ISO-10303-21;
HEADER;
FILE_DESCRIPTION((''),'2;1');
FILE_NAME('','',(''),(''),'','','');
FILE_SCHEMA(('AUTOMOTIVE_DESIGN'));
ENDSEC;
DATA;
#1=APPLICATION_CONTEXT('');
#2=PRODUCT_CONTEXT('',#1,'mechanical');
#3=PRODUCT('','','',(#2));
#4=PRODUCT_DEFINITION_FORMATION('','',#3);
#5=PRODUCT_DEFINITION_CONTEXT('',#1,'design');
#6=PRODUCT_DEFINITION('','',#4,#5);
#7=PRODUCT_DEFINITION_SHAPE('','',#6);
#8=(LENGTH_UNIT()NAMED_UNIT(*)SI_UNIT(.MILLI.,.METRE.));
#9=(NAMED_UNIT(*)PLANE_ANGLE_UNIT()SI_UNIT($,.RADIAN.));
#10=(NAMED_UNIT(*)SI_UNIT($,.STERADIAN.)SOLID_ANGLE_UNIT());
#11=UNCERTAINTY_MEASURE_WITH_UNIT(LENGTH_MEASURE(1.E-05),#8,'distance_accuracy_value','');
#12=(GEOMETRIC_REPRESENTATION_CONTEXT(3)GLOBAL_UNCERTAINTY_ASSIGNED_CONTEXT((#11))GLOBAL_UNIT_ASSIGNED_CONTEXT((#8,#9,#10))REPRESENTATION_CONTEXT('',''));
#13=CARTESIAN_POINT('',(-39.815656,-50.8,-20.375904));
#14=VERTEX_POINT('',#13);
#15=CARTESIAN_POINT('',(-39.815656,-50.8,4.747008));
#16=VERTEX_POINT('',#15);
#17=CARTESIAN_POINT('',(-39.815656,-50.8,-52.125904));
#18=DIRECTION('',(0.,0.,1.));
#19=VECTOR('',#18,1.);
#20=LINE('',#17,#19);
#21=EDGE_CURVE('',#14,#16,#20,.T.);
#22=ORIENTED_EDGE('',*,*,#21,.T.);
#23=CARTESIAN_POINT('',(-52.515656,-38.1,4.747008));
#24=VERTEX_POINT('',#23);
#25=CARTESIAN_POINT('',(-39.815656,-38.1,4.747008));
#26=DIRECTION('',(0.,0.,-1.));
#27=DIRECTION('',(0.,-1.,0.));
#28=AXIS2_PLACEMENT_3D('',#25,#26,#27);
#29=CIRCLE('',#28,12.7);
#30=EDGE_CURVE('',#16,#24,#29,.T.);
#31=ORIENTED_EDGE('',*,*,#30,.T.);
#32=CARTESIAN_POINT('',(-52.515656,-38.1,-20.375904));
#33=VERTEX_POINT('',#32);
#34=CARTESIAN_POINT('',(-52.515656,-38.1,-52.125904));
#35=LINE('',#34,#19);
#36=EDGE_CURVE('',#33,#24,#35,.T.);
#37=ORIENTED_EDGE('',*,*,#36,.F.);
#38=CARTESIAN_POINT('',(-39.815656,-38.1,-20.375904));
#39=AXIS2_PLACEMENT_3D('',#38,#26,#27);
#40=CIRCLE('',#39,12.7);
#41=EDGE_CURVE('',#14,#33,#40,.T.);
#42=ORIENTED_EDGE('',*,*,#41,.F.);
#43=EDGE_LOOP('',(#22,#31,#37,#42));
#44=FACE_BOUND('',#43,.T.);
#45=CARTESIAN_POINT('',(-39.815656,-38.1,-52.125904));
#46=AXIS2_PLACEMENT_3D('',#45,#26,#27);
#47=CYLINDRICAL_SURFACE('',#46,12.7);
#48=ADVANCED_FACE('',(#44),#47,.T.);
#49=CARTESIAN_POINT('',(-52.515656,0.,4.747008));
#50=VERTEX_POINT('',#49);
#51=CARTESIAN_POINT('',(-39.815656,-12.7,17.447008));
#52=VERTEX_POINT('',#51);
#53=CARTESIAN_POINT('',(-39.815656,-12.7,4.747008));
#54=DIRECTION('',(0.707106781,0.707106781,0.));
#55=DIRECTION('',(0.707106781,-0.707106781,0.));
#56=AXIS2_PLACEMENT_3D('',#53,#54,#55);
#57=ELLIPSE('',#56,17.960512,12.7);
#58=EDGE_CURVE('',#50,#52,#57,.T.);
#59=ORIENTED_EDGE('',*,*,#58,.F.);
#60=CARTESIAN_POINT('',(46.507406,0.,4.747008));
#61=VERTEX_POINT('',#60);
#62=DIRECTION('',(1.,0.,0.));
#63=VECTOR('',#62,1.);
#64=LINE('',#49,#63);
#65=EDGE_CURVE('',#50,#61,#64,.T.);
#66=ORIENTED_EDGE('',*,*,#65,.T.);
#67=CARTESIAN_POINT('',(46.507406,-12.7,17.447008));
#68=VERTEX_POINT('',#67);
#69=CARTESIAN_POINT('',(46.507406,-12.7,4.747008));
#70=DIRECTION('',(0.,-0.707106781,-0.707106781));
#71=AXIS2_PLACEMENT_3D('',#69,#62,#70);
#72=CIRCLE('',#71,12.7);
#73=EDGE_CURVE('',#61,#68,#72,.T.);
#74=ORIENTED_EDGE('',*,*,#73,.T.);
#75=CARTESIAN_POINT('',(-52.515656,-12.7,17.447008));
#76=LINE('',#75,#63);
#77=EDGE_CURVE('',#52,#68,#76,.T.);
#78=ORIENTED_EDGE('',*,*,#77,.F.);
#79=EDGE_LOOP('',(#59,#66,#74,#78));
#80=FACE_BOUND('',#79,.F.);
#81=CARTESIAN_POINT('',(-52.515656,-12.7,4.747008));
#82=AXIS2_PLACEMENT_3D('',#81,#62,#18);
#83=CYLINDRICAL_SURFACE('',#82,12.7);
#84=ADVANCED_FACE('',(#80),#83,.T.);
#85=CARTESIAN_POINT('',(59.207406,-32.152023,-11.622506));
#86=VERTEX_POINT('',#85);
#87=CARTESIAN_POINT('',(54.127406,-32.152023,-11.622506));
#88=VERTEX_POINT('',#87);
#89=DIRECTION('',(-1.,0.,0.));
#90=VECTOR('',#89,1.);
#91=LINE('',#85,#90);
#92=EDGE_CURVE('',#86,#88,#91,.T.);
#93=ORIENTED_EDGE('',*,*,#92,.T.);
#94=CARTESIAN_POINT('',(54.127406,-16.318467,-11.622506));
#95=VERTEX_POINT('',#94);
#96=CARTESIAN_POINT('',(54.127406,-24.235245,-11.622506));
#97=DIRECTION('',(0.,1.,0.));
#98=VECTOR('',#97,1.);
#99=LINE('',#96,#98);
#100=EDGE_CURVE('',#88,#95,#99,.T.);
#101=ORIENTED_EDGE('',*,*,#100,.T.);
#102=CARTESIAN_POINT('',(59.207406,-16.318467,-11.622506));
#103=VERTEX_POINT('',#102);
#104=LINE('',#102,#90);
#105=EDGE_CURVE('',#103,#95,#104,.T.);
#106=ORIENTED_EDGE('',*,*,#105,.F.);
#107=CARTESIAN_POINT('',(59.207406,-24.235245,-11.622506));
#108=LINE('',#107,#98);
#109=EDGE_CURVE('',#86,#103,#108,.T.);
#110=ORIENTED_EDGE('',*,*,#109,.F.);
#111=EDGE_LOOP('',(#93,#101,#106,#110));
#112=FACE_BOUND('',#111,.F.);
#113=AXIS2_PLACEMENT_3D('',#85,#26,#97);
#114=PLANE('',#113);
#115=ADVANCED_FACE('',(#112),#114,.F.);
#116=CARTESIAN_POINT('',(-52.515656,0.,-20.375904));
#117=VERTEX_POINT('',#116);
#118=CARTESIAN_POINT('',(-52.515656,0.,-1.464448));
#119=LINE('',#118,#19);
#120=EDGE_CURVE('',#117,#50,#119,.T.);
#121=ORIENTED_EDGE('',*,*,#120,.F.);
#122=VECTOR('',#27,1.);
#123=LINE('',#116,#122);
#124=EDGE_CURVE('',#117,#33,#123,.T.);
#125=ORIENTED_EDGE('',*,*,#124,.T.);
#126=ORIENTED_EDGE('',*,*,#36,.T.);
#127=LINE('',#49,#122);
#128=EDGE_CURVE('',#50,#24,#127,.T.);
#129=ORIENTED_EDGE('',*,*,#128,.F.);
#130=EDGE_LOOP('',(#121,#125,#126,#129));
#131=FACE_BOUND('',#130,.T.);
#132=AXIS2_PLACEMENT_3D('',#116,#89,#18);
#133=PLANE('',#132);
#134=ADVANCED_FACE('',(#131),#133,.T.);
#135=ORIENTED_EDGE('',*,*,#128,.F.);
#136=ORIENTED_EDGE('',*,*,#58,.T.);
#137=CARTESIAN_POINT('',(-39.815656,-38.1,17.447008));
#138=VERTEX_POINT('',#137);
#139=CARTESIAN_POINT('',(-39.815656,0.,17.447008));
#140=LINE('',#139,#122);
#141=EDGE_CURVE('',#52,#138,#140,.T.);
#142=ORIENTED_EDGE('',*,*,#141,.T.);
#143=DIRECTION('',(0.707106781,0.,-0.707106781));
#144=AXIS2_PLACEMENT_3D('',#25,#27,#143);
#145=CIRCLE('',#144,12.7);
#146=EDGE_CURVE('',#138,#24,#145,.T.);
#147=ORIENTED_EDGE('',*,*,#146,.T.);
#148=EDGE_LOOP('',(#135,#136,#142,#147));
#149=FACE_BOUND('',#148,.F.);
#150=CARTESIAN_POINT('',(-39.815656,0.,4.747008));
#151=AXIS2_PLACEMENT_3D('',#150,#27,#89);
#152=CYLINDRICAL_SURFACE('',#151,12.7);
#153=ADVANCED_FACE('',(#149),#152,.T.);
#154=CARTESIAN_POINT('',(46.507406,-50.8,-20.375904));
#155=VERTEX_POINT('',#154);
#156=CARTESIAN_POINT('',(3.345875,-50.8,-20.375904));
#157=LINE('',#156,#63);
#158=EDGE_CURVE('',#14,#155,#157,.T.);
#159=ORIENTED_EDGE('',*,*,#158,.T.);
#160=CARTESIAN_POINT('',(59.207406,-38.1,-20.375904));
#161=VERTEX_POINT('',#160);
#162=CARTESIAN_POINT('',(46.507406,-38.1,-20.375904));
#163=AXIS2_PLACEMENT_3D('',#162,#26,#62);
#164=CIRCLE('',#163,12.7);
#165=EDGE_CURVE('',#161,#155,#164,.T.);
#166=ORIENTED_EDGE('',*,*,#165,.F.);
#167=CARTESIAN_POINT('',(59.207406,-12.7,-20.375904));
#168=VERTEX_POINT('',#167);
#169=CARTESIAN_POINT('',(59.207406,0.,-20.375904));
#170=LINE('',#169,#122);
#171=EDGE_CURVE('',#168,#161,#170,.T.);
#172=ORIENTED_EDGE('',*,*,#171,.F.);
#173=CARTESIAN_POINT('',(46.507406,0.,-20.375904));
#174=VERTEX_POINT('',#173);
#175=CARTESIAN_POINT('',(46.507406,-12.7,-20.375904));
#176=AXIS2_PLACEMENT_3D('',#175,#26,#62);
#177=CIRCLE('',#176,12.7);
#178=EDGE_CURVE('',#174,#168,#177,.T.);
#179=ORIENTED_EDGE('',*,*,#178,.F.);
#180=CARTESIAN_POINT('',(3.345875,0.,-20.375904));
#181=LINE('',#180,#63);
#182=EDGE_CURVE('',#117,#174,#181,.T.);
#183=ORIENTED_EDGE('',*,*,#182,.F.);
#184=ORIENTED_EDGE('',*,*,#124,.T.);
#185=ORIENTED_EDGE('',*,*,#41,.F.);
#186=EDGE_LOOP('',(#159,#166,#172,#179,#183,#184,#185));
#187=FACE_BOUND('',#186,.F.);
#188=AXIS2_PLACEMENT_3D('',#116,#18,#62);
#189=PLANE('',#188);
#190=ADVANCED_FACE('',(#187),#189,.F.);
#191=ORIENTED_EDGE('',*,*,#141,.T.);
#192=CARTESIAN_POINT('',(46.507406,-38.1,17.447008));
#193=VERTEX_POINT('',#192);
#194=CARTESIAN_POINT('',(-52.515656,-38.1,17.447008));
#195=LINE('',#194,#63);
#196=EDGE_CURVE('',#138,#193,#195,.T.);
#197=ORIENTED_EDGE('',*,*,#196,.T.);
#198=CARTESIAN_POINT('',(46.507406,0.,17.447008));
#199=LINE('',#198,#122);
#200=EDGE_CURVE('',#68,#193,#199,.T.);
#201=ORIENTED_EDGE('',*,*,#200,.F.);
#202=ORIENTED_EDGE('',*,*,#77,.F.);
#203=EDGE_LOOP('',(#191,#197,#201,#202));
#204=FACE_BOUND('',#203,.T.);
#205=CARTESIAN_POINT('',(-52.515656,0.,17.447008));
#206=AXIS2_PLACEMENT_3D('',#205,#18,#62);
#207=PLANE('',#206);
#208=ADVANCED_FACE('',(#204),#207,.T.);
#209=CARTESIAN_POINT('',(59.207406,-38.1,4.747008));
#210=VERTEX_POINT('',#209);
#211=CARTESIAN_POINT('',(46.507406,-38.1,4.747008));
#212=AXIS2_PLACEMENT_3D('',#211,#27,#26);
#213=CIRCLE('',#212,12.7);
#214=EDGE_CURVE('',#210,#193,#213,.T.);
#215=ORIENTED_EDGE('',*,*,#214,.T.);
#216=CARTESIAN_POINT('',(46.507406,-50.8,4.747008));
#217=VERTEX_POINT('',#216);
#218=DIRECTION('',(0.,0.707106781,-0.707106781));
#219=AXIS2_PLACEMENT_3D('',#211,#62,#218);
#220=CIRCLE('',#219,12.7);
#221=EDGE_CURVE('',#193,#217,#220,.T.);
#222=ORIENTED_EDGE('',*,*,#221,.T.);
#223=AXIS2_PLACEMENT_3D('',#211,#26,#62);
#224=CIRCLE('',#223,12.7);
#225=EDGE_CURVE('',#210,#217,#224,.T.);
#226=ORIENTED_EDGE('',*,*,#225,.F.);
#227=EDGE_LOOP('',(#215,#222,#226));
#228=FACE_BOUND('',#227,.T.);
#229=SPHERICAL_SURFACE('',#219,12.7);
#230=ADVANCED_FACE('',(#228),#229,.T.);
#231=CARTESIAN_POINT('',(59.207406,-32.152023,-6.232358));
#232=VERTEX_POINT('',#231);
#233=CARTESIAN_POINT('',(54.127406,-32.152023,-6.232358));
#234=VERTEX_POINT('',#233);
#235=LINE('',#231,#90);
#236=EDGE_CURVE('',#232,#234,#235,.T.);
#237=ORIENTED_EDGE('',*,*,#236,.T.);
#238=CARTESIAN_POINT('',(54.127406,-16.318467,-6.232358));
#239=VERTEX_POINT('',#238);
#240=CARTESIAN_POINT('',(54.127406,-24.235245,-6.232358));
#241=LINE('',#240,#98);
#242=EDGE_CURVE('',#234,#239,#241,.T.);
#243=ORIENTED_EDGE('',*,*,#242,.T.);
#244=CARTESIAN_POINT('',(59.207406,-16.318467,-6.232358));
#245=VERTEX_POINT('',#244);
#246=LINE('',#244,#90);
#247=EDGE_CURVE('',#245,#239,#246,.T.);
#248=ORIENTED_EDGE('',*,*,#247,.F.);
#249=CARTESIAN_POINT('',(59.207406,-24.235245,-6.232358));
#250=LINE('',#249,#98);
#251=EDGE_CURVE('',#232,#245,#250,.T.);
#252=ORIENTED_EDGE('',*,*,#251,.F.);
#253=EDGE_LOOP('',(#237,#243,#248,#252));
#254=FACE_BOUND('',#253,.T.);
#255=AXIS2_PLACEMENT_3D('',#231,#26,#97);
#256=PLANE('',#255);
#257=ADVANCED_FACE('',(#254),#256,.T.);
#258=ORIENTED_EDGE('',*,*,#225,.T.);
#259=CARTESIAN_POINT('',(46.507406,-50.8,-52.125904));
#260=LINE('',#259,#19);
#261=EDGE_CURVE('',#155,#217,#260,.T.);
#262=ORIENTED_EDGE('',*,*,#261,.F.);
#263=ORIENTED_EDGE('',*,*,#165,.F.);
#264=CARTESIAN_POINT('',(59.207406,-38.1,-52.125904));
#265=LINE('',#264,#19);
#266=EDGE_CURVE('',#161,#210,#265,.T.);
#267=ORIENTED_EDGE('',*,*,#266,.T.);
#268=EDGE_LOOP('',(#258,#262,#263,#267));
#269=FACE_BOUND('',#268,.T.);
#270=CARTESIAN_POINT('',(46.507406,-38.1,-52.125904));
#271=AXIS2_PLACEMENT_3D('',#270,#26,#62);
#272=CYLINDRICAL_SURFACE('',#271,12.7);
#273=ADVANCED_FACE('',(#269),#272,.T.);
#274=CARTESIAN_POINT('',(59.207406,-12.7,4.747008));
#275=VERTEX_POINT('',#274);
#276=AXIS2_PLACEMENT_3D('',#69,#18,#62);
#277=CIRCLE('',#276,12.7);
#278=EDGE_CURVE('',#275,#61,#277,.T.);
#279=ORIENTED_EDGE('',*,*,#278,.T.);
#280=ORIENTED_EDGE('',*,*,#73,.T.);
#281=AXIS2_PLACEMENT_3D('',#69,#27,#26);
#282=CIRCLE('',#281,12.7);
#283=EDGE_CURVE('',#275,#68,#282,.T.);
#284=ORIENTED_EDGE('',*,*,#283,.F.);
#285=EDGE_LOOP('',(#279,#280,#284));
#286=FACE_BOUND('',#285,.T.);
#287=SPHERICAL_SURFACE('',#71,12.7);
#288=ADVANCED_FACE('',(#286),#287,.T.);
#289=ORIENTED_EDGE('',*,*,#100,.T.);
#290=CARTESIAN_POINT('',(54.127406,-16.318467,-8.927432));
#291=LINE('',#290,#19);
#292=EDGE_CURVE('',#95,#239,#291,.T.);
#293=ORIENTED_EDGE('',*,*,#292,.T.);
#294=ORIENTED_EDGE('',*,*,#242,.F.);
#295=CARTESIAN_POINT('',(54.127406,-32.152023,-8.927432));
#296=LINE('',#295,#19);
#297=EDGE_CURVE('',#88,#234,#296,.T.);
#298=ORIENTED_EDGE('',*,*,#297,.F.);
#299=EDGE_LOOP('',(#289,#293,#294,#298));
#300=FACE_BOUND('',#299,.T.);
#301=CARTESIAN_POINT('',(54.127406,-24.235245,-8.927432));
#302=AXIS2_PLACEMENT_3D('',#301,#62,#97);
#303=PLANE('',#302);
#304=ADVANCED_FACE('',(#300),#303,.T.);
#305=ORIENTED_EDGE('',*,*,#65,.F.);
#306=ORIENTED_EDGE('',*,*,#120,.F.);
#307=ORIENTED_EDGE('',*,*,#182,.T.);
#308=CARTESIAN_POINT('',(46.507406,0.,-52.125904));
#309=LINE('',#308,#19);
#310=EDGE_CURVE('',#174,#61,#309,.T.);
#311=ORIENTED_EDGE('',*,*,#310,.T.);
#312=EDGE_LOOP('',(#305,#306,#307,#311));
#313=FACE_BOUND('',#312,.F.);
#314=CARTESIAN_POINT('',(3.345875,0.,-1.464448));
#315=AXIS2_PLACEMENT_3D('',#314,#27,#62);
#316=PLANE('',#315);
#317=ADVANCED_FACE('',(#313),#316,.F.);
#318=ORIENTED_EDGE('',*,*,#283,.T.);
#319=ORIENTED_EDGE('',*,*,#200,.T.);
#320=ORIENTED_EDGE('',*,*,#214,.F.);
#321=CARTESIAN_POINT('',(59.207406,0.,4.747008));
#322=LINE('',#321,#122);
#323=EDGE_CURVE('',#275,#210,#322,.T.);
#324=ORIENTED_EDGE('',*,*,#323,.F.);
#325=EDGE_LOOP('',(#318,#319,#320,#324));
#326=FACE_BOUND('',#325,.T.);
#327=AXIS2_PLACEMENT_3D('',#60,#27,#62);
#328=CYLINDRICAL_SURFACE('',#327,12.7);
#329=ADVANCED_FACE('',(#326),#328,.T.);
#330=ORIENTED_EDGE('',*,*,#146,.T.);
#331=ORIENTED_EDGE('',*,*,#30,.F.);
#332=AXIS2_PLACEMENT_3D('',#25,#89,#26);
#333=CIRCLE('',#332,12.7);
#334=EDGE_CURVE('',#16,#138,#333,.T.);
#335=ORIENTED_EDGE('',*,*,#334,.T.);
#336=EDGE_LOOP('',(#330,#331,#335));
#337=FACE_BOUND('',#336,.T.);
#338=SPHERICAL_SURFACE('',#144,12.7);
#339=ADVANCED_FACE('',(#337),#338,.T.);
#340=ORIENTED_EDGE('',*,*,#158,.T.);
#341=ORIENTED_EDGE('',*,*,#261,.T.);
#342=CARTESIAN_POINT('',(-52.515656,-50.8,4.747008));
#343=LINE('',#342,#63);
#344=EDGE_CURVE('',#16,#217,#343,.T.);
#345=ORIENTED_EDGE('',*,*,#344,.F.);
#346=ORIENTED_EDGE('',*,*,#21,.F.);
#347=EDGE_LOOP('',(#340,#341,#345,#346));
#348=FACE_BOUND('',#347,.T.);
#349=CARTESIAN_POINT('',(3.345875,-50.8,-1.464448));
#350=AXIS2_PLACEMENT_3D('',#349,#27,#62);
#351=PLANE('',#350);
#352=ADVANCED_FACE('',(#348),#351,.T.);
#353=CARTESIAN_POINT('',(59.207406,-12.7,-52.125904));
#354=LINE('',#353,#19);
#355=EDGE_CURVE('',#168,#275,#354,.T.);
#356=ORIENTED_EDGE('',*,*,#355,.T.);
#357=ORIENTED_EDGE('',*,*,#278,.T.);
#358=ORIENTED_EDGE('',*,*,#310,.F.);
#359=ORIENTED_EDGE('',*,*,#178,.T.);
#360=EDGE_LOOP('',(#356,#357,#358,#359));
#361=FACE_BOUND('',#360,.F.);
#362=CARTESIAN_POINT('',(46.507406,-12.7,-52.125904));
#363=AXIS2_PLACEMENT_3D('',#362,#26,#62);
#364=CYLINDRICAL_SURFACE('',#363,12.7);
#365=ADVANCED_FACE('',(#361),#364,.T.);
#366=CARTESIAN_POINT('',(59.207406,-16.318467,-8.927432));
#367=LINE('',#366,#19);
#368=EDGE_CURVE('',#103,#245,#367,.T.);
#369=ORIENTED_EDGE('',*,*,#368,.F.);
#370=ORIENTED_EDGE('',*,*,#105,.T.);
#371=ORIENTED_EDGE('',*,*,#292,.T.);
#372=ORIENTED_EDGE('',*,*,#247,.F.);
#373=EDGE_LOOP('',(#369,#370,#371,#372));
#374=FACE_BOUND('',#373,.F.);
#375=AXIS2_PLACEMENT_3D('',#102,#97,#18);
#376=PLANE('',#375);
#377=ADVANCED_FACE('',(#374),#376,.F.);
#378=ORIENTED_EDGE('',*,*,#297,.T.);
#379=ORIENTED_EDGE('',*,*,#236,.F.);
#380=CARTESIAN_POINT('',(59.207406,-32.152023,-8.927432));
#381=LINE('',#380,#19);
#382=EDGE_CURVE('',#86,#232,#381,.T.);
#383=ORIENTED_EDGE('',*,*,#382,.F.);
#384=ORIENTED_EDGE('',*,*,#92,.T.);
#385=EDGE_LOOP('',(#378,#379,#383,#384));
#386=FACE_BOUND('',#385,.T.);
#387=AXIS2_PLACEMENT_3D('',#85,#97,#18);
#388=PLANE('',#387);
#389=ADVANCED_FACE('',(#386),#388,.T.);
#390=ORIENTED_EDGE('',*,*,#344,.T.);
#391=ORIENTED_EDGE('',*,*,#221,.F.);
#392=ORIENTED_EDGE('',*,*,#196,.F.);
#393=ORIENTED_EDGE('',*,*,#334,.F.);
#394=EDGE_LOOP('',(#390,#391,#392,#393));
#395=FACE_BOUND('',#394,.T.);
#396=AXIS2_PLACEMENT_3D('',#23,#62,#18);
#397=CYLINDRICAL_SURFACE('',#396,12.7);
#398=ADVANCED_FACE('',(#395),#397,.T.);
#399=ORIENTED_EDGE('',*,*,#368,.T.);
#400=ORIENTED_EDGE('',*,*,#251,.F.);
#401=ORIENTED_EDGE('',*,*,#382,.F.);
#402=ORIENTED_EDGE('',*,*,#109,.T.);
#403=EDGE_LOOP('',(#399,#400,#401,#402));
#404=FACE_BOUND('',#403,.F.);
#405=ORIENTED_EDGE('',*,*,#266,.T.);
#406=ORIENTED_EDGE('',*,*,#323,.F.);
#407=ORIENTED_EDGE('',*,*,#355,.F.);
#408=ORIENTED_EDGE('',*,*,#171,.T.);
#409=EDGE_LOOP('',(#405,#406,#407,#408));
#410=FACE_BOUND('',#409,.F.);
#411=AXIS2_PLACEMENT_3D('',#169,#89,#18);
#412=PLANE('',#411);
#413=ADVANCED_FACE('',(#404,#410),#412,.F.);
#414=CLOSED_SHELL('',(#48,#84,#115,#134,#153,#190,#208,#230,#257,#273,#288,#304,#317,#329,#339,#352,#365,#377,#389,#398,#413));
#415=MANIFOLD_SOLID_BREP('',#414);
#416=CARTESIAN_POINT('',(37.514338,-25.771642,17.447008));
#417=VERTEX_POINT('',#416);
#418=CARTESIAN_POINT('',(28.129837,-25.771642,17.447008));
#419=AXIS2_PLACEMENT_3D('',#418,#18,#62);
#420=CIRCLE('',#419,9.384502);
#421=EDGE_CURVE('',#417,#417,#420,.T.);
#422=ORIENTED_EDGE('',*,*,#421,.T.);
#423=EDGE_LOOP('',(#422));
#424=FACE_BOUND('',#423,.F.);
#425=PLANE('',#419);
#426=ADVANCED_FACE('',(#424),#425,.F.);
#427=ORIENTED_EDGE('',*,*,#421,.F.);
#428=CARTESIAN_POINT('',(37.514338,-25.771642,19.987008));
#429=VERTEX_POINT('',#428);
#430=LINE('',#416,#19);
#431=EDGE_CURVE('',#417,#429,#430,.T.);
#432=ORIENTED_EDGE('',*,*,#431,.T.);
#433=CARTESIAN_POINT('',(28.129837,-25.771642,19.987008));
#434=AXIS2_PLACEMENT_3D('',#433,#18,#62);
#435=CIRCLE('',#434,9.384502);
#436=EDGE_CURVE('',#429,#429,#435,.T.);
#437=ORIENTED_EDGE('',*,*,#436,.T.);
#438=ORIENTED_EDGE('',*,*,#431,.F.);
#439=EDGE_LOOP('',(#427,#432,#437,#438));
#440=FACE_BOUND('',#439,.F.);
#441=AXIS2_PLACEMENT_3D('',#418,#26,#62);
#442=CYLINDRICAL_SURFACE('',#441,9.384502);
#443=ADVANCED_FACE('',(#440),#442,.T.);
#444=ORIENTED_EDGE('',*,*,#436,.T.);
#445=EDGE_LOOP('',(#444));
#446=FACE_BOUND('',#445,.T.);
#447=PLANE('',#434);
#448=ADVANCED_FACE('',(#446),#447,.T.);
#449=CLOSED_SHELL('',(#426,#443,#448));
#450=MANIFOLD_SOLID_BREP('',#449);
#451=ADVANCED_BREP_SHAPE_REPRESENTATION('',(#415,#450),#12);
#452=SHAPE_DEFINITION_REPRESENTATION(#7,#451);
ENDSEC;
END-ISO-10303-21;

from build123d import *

# Parameters (mm, degrees)
F0_W         = 111.723061651
F0_H         = 37.8229115158
F1_DEPTH     = 50.8
F2_R         = 12.7
F3_T1_DEPTH  = 56.8729115158
F3_S5_W      = 12.7
F3_S5_H      = 12.7
F3_T6_DEPTH  = 12.7
F3_S11_W     = 12.7
F3_S11_H     = 12.7
F3_T12_DEPTH = 12.7
F3_S17_W     = 12.7
F3_S17_H     = 12.7
F3_T18_DEPTH = 12.7
F4_W         = 15.8335566521
F4_H         = 5.3901481442
F5_DEPTH     = 5.08
F6_R         = 9.3845015794
F7_DEPTH     = 2.54


# Not quite as in the source:
# - a fillet or chamfer that OpenCascade refuses, or shapes differently, is made with other operations: its cross-section is extruded or revolved along the edge and cut away or added


with BuildPart() as f1:
    # F0 (on Front) → F1 (new body)
    with BuildSketch(Plane.XZ):
        with Locations((3.3458750695, -1.4644479379)):
            Rectangle(F0_W, F0_H)
    extrude(amount=F1_DEPTH)

    # F2
    f2_edges = [f1.edges().sort_by_distance(p)[0] for p in [
        (59.207406, -25.4, 17.447008),
        (-52.515656, -25.4, 17.447008),
        (3.345875, 0, 17.447008),
        (3.345875, -50.8, 17.447008),
    ]]
    fillet(f2_edges, radius=F2_R)

    # F3: fillet of radius 12.7 on 7 edges, made by hand

    # F3_s2 → F3_t1 (cut)
    with BuildSketch(Plane.XY.offset(-52.1259036958)):
        with BuildLine():
            ThreePointArc((-39.815655756, -50.8), (-48.7959118771, -47.0802561211), (-52.515655756, -38.1))
            Line((-52.515655756, -38.1), (-52.515655756, -50.8))
            Line((-52.515655756, -50.8), (-39.815655756, -50.8))
        make_face()
        with BuildLine():
            ThreePointArc((59.207405895, -38.1), (55.4876620161, -47.0802561211), (46.507405895, -50.8))
            Line((46.507405895, -50.8), (59.207405895, -50.8))
            Line((59.207405895, -50.8), (59.207405895, -38.1))
        make_face()
        with BuildLine():
            ThreePointArc((59.207405895, -12.7), (55.4876620161, -3.7197438789), (46.507405895, 0))
            Line((46.507405895, 0), (59.207405895, 0))
            Line((59.207405895, 0), (59.207405895, -12.7))
        make_face()
    extrude(amount=F3_T1_DEPTH, mode=Mode.SUBTRACT)


with BuildPart() as f3_tool4:
    # F3_s5 → F3_t6 (new body)
    with BuildSketch(Plane.YZ.offset(46.507405895)):
        with Locations((-6.35, 11.09700782)):
            Rectangle(F3_S5_W, F3_S5_H)
    extrude(amount=F3_T6_DEPTH)

    # F3_s7 → F3_t8 (revolve, cut)
    with BuildSketch(Plane(origin=(46.507405895, -12.7, 4.74700782), x_dir=(0, -0.7071067812, -0.7071067812), z_dir=(0, -0.7071067812, 0.7071067812))):
        with BuildLine():
            ThreePointArc((0, -12.7), (12.7, 0), (0, 12.7))
            Line((0, 12.7), (0, -12.7))
        make_face()
    revolve(axis=Axis((46.507405895, -12.7, 4.74700782), (1, 0, 0)), mode=Mode.SUBTRACT)


with BuildPart() as f1_1:
    add(f1.part)

    # F3_t3: cut F3_tool4
    add(f3_tool4.part, mode=Mode.SUBTRACT)


with BuildPart() as f3_tool10:
    # F3_s11 → F3_t12 (new body)
    with BuildSketch(Plane.YZ.offset(46.507405895)):
        with Locations((-44.45, 11.09700782)):
            Rectangle(F3_S11_W, F3_S11_H)
    extrude(amount=F3_T12_DEPTH)

    # F3_s13 → F3_t14 (revolve, cut)
    with BuildSketch(Plane(origin=(46.507405895, -38.1, 4.74700782), x_dir=(0, 0.7071067812, -0.7071067812), z_dir=(0, -0.7071067812, -0.7071067812))):
        with BuildLine():
            ThreePointArc((0, -12.7), (12.7, 0), (0, 12.7))
            Line((0, 12.7), (0, -12.7))
        make_face()
    revolve(axis=Axis((46.507405895, -38.1, 4.74700782), (1, 0, 0)), mode=Mode.SUBTRACT)


with BuildPart() as f1_2:
    add(f1_1.part)

    # F3_t9: cut F3_tool10
    add(f3_tool10.part, mode=Mode.SUBTRACT)


with BuildPart() as f3_tool16:
    # F3_s17 → F3_t18 (new body)
    with BuildSketch(Plane.XZ.offset(38.1)):
        with Locations((-46.165655756, 11.09700782)):
            Rectangle(F3_S17_W, F3_S17_H)
    extrude(amount=F3_T18_DEPTH)

    # F3_s19 → F3_t20 (revolve, cut)
    with BuildSketch(Plane(origin=(-39.815655756, -38.1, 4.74700782), x_dir=(0.7071067812, 0, -0.7071067812), z_dir=(-0.7071067812, 0, -0.7071067812))):
        with BuildLine():
            ThreePointArc((0, -12.7), (12.7, 0), (0, 12.7))
            Line((0, 12.7), (0, -12.7))
        make_face()
    revolve(axis=Axis((-39.815655756, -38.1, 4.74700782), (0, -1, 0)), mode=Mode.SUBTRACT)


with BuildPart() as f1_3:
    add(f1_2.part)

    # F3_t15: cut F3_tool16
    add(f3_tool16.part, mode=Mode.SUBTRACT)

    # F4 (on face) → F5 (cut)
    with BuildSketch(Plane.YZ.offset(59.207405895)):
        with Locations((-24.2352448404, -8.9274321217)):
            Rectangle(F4_W, F4_H)
    extrude(amount=-F5_DEPTH, mode=Mode.SUBTRACT)


with BuildPart() as f7:
    # F6 (on face) → F7 (new body)
    with BuildSketch(Plane.XY.offset(17.44700782)):
        with Locations((28.1298365444, -25.7716421038)):
            Circle(F6_R)
    extrude(amount=F7_DEPTH)


solid = Compound([f1_3.part, f7.part])
